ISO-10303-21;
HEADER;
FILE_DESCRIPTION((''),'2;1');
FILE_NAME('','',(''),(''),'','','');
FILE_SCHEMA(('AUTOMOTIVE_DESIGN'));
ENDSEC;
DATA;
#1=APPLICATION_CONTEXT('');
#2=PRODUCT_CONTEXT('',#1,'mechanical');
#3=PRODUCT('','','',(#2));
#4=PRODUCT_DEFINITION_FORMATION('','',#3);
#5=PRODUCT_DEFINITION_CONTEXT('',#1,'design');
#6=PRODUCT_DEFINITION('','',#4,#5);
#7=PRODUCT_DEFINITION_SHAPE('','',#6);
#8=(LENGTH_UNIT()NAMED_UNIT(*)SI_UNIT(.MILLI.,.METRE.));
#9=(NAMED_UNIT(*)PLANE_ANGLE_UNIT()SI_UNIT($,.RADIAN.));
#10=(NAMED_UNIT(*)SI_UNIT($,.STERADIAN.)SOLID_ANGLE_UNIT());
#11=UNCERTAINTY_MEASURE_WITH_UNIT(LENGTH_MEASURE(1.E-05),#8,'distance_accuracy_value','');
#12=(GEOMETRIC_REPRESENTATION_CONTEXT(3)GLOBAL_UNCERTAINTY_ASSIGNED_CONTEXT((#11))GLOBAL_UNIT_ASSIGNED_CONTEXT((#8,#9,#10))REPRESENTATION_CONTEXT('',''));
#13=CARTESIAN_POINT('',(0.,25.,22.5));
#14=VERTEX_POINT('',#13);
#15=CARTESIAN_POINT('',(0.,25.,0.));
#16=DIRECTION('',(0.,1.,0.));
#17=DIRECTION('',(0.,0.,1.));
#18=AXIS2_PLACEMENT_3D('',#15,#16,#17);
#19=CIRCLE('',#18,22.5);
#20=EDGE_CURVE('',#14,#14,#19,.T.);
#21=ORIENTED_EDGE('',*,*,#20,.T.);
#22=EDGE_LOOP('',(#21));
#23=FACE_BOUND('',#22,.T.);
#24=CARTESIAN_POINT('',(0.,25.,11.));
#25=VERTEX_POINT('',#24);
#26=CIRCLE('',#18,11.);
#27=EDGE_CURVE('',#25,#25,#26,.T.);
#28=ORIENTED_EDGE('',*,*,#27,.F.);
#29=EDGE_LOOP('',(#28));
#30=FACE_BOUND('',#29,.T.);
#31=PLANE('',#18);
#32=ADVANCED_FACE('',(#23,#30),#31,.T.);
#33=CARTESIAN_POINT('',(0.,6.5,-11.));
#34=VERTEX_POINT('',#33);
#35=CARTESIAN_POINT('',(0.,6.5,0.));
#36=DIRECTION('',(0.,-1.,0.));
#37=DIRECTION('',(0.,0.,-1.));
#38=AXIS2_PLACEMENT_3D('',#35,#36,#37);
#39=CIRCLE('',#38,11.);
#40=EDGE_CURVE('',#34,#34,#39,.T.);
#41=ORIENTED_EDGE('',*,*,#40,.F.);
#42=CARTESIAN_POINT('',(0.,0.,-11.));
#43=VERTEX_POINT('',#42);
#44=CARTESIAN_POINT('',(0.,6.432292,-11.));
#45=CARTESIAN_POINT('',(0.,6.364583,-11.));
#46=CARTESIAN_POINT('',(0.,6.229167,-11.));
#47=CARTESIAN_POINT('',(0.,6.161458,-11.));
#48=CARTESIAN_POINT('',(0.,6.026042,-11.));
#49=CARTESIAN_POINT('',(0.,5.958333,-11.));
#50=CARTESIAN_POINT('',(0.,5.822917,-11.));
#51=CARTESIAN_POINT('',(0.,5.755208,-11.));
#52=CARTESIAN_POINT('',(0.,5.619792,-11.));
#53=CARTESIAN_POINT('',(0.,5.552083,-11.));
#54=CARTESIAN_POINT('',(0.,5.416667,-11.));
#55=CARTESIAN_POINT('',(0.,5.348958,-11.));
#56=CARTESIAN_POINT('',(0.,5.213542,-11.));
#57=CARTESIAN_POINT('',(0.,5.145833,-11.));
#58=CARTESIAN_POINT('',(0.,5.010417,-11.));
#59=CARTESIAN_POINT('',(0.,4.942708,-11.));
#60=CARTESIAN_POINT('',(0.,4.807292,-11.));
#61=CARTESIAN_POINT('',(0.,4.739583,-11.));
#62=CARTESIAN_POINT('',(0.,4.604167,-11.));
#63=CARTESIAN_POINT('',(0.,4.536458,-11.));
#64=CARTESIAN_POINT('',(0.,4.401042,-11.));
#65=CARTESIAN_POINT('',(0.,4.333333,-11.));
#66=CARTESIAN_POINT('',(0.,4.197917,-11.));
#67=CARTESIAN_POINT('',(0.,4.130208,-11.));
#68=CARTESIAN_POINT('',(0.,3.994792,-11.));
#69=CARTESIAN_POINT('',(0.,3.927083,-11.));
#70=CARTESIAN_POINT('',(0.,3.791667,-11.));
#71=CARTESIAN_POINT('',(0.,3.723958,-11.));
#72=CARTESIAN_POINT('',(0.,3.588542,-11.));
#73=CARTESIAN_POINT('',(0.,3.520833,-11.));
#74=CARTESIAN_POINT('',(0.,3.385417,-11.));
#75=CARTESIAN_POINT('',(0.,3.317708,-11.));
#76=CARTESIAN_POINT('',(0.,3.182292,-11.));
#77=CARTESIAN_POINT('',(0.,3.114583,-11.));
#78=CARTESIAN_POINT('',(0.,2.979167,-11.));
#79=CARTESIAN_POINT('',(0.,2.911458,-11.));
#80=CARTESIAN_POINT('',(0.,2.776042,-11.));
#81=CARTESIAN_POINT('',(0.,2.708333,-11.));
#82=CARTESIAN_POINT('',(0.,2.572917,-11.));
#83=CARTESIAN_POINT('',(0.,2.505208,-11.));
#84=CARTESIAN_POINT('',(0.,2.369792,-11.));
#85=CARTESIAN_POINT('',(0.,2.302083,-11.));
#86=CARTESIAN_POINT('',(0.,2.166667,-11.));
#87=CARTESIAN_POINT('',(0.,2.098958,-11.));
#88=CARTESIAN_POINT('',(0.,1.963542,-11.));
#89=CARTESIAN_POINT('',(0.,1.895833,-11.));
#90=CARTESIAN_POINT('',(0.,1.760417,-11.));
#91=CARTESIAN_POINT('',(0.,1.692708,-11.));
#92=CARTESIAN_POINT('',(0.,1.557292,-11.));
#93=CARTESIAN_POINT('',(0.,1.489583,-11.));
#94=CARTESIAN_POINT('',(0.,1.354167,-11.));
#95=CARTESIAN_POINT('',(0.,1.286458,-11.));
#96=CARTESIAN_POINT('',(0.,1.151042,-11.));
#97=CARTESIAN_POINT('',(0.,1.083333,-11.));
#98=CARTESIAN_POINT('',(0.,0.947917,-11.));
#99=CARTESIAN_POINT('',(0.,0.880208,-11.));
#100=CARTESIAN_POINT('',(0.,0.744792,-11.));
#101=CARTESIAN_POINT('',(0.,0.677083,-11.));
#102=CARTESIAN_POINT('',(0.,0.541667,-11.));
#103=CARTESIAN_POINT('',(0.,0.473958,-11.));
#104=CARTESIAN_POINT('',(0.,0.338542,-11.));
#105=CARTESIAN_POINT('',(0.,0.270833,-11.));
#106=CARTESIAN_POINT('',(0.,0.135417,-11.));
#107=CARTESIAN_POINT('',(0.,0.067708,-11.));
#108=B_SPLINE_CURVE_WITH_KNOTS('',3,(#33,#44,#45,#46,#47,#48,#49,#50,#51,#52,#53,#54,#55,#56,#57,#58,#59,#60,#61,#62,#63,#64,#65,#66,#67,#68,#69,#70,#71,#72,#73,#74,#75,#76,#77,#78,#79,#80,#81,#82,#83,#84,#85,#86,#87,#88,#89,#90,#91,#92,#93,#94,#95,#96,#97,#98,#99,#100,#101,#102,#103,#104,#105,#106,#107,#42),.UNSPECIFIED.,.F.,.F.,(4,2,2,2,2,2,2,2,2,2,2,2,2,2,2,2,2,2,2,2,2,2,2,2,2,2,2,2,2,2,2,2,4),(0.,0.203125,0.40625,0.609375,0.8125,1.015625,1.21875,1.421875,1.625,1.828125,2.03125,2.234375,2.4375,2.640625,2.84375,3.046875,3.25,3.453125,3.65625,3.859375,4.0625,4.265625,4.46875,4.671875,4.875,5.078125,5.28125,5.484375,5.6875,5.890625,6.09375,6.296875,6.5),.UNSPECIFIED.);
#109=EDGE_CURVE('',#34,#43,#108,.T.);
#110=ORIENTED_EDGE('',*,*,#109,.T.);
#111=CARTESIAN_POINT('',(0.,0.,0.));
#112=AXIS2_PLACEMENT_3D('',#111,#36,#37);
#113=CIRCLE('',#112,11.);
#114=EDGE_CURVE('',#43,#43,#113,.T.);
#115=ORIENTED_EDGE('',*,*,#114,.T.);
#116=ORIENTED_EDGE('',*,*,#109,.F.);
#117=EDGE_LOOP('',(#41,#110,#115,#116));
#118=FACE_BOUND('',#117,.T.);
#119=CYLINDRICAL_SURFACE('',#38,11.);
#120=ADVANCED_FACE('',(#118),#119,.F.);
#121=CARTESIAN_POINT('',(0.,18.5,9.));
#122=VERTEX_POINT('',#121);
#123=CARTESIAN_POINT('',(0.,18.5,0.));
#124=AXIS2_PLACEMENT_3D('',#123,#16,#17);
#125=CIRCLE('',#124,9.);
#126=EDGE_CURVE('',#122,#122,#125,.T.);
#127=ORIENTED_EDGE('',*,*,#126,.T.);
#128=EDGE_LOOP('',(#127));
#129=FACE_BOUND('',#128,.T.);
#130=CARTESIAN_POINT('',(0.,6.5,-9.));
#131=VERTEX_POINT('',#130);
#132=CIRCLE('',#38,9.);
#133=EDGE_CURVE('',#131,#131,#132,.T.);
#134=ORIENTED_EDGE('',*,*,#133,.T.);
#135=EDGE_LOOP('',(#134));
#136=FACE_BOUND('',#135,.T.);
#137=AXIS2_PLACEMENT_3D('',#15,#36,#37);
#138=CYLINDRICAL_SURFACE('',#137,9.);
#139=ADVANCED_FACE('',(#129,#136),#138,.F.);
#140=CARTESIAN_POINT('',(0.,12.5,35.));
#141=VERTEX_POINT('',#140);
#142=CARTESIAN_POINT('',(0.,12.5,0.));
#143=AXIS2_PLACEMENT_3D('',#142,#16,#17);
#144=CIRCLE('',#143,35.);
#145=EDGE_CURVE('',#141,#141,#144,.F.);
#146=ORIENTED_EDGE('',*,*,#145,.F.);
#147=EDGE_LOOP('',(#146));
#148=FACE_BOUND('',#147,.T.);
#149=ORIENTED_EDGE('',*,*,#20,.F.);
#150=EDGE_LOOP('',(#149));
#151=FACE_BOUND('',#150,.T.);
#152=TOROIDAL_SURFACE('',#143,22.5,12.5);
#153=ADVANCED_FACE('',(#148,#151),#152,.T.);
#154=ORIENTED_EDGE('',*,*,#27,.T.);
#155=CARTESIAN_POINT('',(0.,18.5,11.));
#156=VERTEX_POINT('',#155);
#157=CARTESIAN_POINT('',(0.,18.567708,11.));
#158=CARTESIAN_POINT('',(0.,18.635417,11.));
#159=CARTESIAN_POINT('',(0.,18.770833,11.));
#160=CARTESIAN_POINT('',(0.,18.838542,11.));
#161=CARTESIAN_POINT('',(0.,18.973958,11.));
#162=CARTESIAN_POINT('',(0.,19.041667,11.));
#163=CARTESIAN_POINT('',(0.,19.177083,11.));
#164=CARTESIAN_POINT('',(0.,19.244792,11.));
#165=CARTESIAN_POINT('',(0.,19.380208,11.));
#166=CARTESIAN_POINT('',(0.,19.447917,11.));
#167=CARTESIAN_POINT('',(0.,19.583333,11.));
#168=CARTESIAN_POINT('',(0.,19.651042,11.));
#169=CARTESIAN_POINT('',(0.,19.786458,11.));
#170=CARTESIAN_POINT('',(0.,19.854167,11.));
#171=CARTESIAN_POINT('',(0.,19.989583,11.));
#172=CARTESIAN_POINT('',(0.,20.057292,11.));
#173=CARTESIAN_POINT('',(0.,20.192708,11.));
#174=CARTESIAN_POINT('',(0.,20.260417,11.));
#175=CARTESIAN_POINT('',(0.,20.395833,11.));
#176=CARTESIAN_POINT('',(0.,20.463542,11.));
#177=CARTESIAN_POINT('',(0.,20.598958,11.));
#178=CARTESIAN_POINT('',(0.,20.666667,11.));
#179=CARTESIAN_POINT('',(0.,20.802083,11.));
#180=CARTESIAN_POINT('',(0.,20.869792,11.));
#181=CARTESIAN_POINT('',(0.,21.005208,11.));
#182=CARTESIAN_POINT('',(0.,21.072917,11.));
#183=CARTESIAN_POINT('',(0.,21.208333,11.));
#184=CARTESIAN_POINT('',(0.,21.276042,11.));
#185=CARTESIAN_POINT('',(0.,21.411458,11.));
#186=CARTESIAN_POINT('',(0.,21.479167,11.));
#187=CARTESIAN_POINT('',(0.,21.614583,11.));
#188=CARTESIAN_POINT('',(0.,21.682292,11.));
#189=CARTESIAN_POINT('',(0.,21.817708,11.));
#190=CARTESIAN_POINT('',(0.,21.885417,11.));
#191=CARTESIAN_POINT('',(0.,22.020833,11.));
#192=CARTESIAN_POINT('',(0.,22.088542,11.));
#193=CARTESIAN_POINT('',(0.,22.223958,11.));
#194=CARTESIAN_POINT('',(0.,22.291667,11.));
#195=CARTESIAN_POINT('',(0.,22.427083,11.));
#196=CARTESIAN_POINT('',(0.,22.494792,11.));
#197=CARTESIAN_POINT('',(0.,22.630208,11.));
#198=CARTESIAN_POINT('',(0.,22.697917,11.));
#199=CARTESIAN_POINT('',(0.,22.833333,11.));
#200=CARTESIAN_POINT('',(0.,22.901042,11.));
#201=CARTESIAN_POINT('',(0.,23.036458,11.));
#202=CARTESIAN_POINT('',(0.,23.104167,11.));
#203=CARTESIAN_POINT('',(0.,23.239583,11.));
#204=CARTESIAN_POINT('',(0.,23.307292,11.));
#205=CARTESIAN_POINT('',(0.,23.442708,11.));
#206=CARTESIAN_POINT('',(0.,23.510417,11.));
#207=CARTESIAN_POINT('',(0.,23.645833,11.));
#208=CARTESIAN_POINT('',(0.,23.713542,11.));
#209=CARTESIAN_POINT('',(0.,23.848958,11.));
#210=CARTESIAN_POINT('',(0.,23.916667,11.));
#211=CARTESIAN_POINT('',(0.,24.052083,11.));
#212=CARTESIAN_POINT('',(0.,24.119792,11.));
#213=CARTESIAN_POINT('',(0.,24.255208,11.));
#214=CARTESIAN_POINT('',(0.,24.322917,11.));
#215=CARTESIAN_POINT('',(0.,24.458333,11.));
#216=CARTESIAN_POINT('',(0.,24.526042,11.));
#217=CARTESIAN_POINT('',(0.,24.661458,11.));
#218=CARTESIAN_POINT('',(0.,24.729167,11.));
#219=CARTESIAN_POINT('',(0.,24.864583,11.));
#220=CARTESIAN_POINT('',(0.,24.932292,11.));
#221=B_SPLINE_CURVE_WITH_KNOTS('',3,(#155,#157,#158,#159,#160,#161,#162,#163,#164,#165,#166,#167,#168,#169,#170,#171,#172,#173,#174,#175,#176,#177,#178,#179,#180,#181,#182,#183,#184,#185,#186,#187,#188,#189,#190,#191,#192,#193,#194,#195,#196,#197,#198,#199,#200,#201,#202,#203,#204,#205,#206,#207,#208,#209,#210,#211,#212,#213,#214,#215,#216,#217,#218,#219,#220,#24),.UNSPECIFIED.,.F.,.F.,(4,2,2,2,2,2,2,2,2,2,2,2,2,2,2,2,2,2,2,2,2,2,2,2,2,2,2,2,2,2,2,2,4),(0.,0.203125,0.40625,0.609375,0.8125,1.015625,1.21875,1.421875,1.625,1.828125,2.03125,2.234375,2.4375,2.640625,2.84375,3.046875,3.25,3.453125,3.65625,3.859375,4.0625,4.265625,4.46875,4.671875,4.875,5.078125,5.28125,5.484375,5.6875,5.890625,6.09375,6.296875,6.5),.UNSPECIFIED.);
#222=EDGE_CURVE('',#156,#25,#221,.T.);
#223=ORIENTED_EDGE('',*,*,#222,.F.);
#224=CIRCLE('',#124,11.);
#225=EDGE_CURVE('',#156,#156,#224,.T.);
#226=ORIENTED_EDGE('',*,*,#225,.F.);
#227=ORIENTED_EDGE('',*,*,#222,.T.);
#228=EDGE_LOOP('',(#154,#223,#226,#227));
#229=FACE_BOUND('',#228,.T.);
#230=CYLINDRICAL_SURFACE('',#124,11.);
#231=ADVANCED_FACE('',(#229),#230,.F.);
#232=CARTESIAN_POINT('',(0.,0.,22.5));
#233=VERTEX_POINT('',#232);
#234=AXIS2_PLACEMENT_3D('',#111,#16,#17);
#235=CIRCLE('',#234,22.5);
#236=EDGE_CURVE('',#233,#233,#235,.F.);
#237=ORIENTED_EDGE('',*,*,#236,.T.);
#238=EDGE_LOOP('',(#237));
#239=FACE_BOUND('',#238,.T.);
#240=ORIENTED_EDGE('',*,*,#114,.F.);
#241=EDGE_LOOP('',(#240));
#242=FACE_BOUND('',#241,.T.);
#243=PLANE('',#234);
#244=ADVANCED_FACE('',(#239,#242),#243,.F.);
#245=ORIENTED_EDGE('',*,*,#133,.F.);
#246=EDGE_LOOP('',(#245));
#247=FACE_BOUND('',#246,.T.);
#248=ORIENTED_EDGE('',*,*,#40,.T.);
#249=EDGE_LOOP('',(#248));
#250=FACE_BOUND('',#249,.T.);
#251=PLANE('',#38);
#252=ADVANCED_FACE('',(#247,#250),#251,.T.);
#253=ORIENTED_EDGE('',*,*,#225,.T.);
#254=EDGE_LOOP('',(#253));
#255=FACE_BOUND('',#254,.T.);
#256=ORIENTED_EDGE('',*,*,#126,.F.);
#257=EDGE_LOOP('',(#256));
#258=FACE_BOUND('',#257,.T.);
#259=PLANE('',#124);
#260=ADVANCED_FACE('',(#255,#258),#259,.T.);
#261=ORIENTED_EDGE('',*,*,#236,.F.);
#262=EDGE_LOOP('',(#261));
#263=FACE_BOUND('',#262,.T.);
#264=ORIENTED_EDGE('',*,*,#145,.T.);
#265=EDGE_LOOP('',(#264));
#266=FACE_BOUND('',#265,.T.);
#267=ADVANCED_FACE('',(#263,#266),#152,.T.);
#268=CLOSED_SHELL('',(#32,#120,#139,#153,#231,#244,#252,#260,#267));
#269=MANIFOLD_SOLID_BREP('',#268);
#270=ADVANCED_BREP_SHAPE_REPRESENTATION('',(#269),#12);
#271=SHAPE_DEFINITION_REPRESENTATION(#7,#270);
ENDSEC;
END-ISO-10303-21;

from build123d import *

# Parameters (mm, degrees)
SKETCH1_R           = 35
BOSS_EXTRUDE1_DEPTH = 25
FILLET1_R           = 12.5
SKETCH2_R           = 11
CUT_EXTRUDE1_DEPTH  = 6.5
CUT_EXTRUDE2_START  = -6.5
SKETCH3_R           = 11
CUT_EXTRUDE2_DEPTH  = 6.5
SKETCH4_R           = 9
CUT_EXTRUDE3_DEPTH  = 53.841744861


with BuildPart() as part:
    # Sketch1 → Boss-Extrude1 (new body)
    with BuildSketch(Plane(origin=(0, 0, 0), x_dir=(1, 0, 0), z_dir=(0, 1, 0))):
        with Locations(Location((0, 0, 0), (0, 0, 270))):
            Circle(SKETCH1_R)
    extrude(amount=BOSS_EXTRUDE1_DEPTH)

    # Fillet1
    fillet1_edges = [part.edges().sort_by_distance(p)[0] for p in [
        (0, 0, -35),
        (0, 25, -35),
    ]]
    fillet(fillet1_edges, radius=FILLET1_R - 0.0001)  # a hair under: the kernel refuses the full size

    # Sketch2 → Cut-Extrude1 (cut)
    with BuildSketch(Plane(origin=(0, 25, 0), x_dir=(1, 0, 0), z_dir=(0, 1, 0))):
        with Locations(Location((0, 0, 0), (0, 0, 270))):
            Circle(SKETCH2_R)
    extrude(amount=-CUT_EXTRUDE1_DEPTH, mode=Mode.SUBTRACT)

    # Sketch3 → Cut-Extrude2 (cut)
    with BuildSketch(Plane.XZ.offset(CUT_EXTRUDE2_START)):
        with Locations(Location((0, 0, 0), (0, 0, 90))):
            Circle(SKETCH3_R)
    extrude(amount=CUT_EXTRUDE2_DEPTH, mode=Mode.SUBTRACT)

    # Sketch4 → Cut-Extrude3 (cut, through all)
    with BuildSketch(Plane.XZ.offset(-6.5)):
        with Locations(Location((0, 0, 0), (0, 0, 270))):
            Circle(SKETCH4_R)
    extrude(amount=-CUT_EXTRUDE3_DEPTH, mode=Mode.SUBTRACT)


solid = part.part
